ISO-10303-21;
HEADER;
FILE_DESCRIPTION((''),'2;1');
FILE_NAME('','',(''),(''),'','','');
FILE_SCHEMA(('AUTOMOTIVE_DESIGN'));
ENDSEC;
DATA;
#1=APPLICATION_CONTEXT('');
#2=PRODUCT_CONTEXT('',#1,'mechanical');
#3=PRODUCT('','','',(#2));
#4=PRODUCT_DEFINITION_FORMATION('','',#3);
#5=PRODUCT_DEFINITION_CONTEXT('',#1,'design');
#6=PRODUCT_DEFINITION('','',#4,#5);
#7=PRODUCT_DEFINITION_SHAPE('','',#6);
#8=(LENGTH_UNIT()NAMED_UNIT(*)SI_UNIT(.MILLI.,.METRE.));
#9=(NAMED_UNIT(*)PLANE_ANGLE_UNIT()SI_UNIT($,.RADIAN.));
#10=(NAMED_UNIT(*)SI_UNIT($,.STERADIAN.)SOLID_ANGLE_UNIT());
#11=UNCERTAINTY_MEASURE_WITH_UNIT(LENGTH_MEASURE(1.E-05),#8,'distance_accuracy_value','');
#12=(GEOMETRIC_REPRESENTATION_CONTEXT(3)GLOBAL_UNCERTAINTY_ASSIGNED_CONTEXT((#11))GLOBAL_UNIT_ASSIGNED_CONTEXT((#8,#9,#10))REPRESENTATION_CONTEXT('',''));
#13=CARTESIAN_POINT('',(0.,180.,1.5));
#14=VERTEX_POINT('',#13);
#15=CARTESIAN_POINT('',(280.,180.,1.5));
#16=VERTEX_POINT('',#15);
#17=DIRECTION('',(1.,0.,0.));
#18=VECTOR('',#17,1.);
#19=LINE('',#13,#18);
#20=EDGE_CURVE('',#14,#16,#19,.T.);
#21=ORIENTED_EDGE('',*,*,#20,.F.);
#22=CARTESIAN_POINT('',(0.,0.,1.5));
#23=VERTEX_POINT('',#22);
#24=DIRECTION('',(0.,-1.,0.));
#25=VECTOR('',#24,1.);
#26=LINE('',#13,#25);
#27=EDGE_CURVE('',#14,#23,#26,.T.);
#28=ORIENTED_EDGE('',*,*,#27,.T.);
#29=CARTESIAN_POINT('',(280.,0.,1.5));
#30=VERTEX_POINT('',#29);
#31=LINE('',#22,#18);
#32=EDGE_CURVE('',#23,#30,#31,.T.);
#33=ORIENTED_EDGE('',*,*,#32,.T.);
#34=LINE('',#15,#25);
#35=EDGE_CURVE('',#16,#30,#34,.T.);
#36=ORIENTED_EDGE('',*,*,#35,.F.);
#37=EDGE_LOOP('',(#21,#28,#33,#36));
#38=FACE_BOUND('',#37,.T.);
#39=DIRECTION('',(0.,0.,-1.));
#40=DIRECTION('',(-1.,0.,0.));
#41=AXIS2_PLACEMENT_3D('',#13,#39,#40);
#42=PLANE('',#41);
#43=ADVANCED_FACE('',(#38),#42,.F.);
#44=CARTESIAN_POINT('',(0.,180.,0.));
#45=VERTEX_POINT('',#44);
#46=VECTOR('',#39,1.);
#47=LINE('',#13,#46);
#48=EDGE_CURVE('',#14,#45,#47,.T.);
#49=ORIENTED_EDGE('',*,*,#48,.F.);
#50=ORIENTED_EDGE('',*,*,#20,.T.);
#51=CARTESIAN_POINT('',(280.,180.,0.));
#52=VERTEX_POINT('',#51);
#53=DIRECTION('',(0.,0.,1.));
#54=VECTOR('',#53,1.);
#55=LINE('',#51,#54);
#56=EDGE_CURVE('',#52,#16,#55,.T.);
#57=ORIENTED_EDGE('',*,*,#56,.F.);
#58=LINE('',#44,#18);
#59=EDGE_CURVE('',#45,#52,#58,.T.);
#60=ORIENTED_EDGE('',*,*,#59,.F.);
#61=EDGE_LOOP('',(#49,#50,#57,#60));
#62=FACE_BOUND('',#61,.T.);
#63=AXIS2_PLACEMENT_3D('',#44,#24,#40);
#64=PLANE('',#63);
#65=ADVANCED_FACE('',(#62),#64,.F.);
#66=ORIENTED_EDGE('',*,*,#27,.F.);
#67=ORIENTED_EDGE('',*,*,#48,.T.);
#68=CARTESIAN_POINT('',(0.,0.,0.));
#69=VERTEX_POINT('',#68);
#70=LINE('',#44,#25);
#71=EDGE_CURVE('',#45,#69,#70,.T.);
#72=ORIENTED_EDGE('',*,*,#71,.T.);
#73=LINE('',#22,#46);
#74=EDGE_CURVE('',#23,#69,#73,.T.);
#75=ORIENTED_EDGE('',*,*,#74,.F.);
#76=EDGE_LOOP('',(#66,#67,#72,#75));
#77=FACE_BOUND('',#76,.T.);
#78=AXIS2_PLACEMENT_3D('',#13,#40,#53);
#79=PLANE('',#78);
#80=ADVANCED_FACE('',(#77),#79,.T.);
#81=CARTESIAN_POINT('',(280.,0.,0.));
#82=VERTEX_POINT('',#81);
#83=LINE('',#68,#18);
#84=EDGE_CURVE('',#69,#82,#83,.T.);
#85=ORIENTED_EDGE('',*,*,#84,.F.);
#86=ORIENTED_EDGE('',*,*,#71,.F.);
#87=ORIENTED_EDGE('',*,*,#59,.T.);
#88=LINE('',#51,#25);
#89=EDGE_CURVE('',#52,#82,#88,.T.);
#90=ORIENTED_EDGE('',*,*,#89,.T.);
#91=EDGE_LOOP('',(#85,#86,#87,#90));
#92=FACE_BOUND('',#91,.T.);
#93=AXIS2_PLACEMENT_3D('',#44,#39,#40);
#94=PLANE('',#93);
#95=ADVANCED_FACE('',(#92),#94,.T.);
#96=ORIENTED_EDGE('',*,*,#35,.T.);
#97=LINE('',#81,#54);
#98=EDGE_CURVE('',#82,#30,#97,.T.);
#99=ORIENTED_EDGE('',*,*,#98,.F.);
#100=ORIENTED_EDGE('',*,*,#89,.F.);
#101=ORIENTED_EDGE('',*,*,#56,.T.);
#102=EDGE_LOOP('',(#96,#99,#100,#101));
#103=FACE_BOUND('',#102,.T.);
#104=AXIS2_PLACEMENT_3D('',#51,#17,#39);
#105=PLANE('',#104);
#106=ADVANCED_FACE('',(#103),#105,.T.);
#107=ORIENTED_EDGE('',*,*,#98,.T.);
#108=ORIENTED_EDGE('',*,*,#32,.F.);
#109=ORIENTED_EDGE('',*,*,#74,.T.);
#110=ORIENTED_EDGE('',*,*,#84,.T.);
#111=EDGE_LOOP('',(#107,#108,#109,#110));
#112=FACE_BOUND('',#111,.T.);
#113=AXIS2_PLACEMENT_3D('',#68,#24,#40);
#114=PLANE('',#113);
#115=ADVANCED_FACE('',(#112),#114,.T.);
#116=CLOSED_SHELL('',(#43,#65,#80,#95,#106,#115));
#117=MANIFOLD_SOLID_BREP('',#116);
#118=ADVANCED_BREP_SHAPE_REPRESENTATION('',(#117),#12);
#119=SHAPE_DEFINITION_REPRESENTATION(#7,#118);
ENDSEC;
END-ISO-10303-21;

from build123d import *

# Parameters (mm, degrees)
SKETCH1_W          = 280
SKETCH1_H          = 1.5
BASE_FLANGE1_DEPTH = 180


# Sheet-metal steps are written as plain solids
with BuildPart() as part:
    # Sketch1 → Base-Flange1 (new body)
    with BuildSketch(Plane(origin=(0, 0, 0), x_dir=(1, 0, 0), z_dir=(0, 1, 0))):
        with Locations((140, -0.75)):
            Rectangle(SKETCH1_W, SKETCH1_H)
    extrude(amount=BASE_FLANGE1_DEPTH)


solid = part.part
